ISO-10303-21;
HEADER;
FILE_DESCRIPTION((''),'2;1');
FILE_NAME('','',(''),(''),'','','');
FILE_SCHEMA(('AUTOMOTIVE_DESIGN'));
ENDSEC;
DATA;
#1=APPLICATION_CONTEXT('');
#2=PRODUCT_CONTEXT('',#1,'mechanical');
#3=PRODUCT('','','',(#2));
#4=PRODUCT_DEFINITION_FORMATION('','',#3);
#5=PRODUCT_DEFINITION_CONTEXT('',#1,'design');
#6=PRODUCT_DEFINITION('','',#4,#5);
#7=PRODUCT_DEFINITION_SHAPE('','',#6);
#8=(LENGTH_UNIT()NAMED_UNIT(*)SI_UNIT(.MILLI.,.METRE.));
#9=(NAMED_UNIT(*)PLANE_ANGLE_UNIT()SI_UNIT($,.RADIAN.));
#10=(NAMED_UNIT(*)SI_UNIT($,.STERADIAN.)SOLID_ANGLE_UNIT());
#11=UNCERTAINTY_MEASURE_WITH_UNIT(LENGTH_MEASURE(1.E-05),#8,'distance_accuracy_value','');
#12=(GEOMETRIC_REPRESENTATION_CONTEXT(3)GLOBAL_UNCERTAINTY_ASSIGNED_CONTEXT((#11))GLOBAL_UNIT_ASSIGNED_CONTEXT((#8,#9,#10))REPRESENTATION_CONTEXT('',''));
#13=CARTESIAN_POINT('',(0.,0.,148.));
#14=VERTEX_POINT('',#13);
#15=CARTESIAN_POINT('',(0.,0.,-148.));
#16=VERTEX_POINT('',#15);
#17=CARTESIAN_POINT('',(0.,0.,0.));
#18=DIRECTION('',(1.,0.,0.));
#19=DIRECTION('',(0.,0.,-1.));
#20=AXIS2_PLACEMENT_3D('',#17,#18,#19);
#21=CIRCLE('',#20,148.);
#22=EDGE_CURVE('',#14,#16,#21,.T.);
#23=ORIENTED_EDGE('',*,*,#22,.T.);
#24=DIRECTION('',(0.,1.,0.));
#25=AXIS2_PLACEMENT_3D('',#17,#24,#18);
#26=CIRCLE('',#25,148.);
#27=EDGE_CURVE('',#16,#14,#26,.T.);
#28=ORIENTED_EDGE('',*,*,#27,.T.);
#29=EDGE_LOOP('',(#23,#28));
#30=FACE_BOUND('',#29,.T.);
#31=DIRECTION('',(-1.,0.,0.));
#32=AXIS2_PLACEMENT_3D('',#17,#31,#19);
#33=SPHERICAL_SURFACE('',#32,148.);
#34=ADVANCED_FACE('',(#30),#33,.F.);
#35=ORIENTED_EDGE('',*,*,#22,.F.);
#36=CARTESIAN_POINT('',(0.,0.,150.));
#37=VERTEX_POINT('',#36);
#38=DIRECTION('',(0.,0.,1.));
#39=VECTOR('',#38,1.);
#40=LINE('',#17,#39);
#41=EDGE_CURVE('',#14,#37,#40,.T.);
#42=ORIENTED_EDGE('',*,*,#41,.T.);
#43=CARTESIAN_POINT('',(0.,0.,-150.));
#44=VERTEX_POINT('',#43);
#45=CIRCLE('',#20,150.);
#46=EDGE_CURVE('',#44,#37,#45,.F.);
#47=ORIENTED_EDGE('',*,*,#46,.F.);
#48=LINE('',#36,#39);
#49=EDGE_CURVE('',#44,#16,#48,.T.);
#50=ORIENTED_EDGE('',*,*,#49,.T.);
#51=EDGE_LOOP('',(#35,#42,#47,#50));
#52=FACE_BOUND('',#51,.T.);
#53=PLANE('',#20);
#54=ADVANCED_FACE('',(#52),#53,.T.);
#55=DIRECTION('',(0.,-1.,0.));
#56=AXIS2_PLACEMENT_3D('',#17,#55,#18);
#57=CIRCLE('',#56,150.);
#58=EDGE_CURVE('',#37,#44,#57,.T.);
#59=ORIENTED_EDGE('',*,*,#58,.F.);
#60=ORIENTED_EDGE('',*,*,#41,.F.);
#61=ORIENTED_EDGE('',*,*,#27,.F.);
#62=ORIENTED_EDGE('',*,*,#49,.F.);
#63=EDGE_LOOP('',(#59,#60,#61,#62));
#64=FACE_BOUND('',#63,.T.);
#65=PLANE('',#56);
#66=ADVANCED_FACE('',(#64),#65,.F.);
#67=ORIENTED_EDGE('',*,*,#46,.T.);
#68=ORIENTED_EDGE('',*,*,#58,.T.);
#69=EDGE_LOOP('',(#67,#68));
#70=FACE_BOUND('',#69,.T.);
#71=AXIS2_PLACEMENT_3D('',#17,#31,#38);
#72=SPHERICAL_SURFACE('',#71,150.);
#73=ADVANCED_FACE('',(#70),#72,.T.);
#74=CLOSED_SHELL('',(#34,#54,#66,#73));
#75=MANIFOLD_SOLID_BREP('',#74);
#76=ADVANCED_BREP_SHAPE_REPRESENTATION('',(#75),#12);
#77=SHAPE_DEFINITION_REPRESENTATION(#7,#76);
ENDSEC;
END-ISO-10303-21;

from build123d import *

# Parameters (mm, degrees)
SKETCH_3_W          = 300
SKETCH_3_H          = 150
CUT_EXTRUDE_1_DEPTH = 260.807621135


# Read off the part's stored shape, not the designer's step: 旋转1
with BuildPart() as part:
    # 旋转1 outline → 旋转1 (revolve)
    with BuildSketch(Plane.XY):
        with BuildLine():
            ThreePointArc((0, -150), (106.066017205, -106.066017151), (150, 7.5e-08))
            Line((150, 7.5e-08), (148, 1e-07))
            ThreePointArc((148, 1e-07), (104.651803651, -104.65180358), (0, -148))
            Line((0, -148), (0, -150))
        make_face()
    revolve(axis=Axis((0, 0, 0), (0, 1, 0)))

    # 草图3 → 切除-拉伸1 (cut, through all)
    with BuildSketch(Plane(origin=(0, 0, 0), x_dir=(0, 0, -1), z_dir=(1, 0, 0))):
        with Locations((0, -75)):
            Rectangle(SKETCH_3_W, SKETCH_3_H)
    extrude(amount=CUT_EXTRUDE_1_DEPTH, mode=Mode.SUBTRACT)


solid = part.part
